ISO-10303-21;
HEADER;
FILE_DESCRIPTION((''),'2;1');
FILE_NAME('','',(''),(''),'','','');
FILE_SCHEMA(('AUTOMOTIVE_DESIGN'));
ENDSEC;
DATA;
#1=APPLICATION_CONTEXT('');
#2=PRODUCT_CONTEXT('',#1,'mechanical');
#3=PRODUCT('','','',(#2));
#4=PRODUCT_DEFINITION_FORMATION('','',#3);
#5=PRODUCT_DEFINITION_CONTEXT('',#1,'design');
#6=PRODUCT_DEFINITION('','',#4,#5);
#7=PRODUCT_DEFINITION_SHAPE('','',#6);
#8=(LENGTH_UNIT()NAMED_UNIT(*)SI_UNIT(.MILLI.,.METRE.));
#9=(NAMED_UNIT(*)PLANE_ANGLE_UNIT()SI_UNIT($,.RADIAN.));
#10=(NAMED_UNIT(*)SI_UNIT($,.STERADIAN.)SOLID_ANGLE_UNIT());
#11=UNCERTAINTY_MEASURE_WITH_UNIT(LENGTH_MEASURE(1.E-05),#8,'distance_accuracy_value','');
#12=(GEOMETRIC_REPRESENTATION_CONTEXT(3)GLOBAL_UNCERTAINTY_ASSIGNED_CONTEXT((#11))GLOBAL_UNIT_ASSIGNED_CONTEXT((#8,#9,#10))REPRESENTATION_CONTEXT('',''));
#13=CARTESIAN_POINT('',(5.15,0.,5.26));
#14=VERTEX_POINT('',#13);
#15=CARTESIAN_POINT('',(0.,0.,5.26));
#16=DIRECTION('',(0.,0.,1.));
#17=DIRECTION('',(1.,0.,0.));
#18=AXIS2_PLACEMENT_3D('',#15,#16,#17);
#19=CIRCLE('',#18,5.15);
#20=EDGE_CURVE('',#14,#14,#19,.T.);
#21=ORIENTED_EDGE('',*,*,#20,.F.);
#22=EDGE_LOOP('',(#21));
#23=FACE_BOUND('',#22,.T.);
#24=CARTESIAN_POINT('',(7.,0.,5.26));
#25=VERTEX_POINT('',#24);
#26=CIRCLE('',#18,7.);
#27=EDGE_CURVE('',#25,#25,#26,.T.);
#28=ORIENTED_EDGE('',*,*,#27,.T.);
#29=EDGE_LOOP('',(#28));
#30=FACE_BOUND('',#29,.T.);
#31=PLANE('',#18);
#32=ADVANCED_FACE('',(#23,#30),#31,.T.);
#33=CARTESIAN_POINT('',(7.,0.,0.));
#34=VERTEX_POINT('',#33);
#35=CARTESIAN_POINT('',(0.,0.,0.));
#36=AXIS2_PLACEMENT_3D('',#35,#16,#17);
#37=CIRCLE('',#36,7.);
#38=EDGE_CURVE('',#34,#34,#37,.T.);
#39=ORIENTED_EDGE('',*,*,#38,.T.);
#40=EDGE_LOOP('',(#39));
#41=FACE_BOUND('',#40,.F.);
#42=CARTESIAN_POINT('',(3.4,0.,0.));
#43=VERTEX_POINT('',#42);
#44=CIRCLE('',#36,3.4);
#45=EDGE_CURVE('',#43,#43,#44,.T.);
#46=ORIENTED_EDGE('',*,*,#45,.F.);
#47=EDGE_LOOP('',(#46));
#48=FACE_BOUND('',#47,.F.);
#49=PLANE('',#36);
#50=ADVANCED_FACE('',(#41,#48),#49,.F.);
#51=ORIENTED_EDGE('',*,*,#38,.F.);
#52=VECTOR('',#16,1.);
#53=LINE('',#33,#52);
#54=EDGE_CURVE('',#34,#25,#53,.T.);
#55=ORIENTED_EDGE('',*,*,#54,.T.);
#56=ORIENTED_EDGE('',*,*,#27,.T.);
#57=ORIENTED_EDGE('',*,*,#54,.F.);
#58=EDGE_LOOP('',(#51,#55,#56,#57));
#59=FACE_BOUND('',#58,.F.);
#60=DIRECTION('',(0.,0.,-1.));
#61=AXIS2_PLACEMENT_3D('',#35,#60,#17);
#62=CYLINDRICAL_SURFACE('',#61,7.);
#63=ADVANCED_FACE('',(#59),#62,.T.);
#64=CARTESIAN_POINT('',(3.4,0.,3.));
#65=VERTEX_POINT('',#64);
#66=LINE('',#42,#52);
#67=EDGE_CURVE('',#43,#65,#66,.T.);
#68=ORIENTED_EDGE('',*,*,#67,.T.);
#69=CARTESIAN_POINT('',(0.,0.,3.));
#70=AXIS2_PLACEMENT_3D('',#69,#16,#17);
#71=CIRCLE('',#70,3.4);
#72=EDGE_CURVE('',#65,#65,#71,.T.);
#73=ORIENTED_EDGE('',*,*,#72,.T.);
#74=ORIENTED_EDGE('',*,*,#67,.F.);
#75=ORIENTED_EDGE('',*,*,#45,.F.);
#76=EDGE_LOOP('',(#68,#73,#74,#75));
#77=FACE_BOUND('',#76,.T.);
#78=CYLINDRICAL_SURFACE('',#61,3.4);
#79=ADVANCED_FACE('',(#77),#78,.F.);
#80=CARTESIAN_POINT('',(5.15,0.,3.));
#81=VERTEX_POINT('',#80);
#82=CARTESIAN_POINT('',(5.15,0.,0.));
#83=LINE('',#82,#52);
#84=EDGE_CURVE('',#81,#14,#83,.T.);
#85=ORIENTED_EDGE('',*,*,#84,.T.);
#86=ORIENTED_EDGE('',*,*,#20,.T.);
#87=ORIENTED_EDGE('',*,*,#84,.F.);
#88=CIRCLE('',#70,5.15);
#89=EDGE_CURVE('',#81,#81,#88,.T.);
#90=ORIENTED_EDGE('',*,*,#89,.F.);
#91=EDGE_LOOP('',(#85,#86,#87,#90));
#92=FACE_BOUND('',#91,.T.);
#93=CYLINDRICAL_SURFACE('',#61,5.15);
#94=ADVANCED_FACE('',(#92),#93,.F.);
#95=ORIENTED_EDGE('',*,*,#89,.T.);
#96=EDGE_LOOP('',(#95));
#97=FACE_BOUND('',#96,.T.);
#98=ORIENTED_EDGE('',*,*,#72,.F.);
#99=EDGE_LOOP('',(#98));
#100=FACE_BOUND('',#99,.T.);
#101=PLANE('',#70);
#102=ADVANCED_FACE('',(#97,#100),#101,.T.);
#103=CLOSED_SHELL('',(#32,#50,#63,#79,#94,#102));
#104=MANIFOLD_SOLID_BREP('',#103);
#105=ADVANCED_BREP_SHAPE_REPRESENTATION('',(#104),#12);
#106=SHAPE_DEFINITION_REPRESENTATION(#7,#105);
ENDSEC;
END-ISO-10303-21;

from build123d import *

# Parameters (mm, degrees)
F0_R     = 5.15
F0_R_2   = 3.4
F1_DEPTH = 3
F0_R_3   = 7
F2_DEPTH = 5.26


# Not quite as in the source:
# - a feature names something its author has since deleted; it is built from what else it names


with BuildPart() as f1:
    # F0 (on Top) → F1 (new body)
    with BuildSketch(Plane.XY):
        Circle(F0_R)
        Circle(F0_R_2, mode=Mode.SUBTRACT)
    extrude(amount=F1_DEPTH)

    # F0 (on Top) → F2 (join)
    with BuildSketch(Plane.XY):
        Circle(F0_R_3)
        Circle(F0_R, mode=Mode.SUBTRACT)
    extrude(amount=F2_DEPTH)


solid = f1.part
